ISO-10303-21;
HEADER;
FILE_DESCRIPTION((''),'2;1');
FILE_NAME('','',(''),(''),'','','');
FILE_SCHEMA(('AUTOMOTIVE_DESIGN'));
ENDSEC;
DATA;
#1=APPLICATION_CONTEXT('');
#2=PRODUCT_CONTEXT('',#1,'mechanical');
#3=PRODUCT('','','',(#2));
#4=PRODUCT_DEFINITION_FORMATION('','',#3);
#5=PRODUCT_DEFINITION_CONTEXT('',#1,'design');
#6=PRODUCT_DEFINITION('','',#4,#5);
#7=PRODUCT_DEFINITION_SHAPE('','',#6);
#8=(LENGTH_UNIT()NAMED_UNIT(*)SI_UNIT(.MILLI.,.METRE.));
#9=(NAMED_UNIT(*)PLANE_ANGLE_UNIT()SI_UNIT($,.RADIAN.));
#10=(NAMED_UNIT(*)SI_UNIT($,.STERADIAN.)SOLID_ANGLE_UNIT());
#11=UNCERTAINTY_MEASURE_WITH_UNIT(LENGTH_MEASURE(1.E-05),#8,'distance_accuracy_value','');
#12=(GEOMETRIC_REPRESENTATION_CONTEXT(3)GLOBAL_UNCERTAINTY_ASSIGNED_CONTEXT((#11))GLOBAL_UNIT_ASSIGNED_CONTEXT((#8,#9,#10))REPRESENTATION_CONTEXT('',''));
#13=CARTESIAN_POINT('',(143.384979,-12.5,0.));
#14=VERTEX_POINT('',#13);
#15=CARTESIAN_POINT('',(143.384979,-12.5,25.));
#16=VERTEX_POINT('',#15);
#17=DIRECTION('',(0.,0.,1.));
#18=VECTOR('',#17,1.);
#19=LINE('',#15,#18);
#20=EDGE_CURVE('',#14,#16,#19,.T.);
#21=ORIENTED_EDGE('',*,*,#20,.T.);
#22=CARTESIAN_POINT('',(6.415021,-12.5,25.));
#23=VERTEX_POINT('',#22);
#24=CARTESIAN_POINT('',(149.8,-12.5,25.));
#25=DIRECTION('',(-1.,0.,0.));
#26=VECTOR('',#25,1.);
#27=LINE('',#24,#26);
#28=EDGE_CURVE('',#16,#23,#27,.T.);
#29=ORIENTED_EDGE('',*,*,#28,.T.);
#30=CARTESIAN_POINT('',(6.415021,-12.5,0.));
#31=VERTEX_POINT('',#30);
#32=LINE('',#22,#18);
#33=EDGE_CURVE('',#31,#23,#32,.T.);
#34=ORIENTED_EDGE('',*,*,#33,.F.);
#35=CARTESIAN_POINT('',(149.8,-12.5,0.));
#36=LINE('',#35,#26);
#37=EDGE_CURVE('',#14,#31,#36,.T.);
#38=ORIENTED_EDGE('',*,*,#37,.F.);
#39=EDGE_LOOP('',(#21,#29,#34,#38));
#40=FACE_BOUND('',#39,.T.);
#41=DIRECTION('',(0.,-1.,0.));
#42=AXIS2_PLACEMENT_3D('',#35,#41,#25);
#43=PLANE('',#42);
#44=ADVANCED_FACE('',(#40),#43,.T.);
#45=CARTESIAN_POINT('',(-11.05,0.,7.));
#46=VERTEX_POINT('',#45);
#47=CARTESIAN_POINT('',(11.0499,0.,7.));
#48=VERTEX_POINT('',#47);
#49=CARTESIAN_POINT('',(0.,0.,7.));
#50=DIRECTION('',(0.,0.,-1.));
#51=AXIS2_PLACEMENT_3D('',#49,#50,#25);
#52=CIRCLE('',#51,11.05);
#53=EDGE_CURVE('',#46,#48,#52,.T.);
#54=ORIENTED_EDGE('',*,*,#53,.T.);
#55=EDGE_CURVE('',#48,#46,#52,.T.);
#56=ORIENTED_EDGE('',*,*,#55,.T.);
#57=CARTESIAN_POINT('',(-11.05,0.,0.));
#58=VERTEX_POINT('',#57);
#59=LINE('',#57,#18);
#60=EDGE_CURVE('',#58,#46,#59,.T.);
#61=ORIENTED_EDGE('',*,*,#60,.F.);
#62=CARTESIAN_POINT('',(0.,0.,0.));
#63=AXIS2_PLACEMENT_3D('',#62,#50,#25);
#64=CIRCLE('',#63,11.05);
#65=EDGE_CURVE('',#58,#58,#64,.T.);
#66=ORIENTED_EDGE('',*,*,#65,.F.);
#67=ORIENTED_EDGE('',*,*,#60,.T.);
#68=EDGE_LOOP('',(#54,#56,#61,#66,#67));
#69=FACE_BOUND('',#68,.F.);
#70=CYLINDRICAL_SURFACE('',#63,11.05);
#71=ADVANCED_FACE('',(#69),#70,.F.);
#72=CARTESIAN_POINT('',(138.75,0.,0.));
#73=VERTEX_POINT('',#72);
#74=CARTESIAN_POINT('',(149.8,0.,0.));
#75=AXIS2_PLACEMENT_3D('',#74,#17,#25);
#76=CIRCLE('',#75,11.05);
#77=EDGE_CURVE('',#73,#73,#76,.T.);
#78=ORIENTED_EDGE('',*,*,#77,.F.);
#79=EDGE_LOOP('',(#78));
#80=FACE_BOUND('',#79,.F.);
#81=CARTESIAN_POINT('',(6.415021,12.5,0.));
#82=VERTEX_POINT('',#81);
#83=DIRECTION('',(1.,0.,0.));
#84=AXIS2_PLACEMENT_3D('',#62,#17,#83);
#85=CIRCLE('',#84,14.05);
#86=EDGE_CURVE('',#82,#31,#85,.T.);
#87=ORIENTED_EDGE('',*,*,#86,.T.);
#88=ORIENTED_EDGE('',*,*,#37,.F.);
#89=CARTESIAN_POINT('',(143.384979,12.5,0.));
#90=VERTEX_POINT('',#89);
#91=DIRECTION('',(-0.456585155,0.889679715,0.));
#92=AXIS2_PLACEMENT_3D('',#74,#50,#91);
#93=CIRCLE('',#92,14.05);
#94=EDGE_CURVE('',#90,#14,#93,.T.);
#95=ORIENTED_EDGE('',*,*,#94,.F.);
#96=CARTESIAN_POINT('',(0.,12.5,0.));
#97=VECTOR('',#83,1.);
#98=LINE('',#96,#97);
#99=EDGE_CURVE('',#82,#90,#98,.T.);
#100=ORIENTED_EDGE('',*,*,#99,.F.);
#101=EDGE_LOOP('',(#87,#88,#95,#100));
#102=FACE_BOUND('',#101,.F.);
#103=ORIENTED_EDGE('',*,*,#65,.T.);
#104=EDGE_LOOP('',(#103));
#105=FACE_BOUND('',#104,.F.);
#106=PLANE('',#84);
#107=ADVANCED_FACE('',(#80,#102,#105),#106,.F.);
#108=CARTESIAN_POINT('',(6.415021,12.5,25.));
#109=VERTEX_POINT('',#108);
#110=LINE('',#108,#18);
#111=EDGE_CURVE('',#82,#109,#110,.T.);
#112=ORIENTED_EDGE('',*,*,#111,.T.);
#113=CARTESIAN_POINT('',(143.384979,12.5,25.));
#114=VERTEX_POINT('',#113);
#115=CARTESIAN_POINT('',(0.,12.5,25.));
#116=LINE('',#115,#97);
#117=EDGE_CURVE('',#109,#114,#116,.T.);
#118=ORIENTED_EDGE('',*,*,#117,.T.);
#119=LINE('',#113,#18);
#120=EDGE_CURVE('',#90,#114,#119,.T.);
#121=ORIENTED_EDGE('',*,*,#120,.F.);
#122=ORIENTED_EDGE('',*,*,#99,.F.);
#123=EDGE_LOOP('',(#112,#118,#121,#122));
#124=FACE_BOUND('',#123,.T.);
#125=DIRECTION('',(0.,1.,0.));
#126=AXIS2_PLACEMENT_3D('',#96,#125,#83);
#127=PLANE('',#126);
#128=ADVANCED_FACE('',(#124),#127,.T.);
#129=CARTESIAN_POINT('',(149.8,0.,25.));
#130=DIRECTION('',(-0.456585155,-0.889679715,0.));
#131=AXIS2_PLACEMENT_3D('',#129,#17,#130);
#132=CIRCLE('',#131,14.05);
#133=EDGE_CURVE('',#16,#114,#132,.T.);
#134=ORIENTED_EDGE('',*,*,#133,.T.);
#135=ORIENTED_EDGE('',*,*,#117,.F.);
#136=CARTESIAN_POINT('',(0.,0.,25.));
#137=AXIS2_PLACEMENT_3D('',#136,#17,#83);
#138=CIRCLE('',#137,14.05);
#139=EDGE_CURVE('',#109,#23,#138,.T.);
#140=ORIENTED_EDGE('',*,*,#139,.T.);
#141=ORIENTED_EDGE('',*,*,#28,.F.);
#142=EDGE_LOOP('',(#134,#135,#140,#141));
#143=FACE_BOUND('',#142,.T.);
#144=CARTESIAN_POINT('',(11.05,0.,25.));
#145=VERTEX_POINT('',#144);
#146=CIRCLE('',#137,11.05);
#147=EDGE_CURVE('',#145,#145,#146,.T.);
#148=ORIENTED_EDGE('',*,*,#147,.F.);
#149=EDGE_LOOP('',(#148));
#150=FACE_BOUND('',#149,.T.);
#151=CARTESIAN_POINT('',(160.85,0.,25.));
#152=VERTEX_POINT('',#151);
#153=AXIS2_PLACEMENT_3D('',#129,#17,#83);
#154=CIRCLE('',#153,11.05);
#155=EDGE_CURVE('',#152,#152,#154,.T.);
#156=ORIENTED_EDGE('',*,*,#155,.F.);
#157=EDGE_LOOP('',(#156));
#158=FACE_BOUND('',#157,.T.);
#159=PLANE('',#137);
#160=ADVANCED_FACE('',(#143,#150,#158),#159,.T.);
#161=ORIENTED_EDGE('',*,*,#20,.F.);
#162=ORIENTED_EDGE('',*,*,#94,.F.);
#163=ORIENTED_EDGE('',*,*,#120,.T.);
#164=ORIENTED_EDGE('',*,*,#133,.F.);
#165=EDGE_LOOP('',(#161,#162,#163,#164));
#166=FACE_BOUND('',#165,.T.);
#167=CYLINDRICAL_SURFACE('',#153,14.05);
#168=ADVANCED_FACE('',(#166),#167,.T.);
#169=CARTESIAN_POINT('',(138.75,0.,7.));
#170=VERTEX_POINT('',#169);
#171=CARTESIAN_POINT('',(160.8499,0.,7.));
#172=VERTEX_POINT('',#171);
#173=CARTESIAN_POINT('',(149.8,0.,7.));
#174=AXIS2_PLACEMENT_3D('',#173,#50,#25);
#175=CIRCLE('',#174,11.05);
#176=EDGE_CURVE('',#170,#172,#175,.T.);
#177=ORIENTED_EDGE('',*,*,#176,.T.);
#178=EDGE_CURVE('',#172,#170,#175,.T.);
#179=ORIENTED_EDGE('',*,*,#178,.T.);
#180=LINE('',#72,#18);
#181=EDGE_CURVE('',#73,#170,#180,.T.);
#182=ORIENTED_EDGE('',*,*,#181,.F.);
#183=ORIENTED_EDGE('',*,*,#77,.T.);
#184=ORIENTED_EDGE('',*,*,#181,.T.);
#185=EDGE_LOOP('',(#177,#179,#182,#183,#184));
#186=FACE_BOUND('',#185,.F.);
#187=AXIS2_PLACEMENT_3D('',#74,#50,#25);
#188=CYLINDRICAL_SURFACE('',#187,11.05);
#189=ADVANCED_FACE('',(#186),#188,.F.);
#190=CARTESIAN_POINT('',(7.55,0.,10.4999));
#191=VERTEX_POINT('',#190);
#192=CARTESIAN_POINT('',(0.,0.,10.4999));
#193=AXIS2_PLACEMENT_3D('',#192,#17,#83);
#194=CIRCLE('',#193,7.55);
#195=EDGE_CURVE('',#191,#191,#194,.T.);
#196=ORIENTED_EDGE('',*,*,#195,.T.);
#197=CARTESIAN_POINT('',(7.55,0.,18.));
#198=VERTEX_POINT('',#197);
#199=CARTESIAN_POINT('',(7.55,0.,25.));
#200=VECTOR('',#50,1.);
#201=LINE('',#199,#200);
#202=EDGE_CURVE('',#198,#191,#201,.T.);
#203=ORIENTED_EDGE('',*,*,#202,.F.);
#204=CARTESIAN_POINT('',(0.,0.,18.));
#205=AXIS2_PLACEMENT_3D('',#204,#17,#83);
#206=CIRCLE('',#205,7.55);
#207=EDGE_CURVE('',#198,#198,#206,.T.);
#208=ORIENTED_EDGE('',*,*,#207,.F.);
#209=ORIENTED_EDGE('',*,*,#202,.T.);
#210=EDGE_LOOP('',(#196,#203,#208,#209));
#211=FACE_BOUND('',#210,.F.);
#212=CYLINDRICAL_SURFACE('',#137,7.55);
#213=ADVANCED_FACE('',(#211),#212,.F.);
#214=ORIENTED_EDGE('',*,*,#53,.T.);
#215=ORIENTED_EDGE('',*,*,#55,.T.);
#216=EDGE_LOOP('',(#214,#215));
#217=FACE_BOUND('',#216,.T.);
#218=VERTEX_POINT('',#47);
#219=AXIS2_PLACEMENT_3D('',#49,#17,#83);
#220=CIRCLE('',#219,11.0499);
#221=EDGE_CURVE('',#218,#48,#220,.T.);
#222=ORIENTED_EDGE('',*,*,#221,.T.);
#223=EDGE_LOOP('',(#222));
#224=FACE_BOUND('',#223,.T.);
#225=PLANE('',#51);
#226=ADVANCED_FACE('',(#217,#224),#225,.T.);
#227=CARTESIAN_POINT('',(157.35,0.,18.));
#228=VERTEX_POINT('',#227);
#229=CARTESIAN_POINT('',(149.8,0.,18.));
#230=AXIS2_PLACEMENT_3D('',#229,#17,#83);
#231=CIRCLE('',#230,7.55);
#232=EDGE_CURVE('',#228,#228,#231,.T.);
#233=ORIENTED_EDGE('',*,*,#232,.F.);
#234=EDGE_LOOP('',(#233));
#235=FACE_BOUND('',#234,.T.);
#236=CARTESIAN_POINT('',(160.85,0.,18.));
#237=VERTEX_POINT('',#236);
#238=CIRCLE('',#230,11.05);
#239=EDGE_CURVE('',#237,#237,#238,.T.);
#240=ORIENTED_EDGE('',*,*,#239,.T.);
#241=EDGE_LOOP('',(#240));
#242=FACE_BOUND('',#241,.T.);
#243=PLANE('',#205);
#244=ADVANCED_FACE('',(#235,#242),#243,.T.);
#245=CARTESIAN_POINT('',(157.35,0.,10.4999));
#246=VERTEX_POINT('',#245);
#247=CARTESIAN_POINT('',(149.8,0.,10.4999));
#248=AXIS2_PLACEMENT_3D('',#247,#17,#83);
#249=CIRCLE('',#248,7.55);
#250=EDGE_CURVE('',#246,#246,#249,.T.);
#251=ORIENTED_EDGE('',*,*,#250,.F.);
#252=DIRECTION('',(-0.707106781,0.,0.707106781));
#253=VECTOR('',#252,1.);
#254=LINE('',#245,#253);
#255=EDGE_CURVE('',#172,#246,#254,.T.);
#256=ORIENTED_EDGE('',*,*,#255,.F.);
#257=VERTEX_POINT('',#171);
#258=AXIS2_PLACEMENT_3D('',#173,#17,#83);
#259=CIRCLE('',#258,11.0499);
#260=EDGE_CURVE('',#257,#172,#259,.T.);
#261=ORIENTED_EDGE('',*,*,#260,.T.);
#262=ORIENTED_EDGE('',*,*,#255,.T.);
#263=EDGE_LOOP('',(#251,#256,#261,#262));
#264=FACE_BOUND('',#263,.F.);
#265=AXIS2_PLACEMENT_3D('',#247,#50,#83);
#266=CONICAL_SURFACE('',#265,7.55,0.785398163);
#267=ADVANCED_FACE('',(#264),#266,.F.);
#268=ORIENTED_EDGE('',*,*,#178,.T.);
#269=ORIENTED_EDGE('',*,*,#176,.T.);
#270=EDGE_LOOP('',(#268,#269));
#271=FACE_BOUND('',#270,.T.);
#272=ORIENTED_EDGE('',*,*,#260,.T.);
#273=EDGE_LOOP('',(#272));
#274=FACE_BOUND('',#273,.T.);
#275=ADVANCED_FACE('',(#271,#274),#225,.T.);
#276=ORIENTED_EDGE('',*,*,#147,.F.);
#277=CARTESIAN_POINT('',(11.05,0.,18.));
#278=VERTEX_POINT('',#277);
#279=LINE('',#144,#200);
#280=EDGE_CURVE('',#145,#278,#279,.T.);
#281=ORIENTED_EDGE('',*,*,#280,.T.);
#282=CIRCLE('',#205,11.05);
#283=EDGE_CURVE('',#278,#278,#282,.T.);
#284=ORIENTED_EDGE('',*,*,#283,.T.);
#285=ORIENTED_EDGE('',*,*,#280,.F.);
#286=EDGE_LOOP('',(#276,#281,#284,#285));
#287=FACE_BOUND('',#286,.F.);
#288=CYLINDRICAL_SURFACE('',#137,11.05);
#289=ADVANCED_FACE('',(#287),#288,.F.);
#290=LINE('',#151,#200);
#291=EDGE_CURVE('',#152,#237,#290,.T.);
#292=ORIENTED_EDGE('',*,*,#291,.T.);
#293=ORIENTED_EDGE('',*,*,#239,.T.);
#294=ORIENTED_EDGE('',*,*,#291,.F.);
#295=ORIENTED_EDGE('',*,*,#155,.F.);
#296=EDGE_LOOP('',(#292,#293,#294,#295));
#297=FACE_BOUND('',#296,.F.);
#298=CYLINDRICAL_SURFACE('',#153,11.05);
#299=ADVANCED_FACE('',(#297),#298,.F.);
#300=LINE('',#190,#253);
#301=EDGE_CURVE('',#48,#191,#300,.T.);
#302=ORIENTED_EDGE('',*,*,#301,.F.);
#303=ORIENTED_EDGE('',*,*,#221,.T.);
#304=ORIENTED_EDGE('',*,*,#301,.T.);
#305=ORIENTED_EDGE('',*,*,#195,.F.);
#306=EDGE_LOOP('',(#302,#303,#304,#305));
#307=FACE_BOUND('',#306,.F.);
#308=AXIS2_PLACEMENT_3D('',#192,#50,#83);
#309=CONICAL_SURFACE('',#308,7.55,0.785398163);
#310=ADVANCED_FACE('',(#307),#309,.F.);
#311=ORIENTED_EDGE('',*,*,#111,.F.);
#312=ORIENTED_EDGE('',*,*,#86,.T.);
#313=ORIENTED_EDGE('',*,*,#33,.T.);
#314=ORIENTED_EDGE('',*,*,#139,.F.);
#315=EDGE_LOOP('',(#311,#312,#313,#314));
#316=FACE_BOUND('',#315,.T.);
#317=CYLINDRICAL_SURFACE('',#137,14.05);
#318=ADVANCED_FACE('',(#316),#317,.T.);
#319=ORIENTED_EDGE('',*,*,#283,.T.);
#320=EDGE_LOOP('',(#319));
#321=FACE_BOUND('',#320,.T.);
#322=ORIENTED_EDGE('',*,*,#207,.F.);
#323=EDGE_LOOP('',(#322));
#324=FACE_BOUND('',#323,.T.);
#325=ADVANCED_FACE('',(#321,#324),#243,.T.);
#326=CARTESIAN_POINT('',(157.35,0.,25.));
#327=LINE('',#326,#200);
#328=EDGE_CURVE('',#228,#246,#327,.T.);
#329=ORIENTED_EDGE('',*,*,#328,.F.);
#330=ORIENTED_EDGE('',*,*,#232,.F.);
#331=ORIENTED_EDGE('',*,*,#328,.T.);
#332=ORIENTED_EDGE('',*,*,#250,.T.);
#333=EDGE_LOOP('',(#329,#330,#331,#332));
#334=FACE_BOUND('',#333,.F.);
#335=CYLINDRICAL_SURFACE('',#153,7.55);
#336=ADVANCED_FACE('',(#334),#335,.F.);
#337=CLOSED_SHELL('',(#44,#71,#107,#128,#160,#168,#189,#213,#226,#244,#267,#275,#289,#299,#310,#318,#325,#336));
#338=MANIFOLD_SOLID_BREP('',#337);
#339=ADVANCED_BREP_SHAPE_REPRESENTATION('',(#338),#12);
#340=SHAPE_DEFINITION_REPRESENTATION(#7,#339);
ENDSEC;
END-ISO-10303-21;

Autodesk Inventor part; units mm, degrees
ref_plane "YZ Plane" through (0, 0, 0) normal (1, 0, 0) x (0, 1, 0)
ref_plane "XZ Plane" through (0, 0, 0) normal (0, 1, 0) x (-1, 0, 0)
ref_plane "XY Plane" through (0, 0, 0) normal (0, 0, 1) x (1, 0, 0)
sketch "Sketch1" plane through (0, 0, 0) normal (0, 0, 1) x (1, 0, 0)
  line L0 (0, 12.5) -> (149.8, 12.5)
  arc A0 (149.8, -12.5) -> (149.8, 12.5) centre (149.8, 0) ccw
  line L1 (149.8, -12.5) -> (0, -12.5)
  arc A1 (0, 12.5) -> (0, -12.5) centre (0, 0) ccw
  dimension "d0" = 149.8
  dimension "d2" = 12.5
extrude "Extrusion1" add sketch "Sketch1" along normal blind 25
sketch "Sketch2" plane through (0, 0, 25) normal (0, 0, 1) x (1, 0, 0)
  arc A0 (0, 12.5) -> (0, -12.5) centre (0, 0) ccw projected
  arc A1 (149.8, -12.5) -> (149.8, 12.5) centre (149.8, 0) ccw projected
  circle A2 centre (0, 0) radius 7.55
  circle A3 centre (149.8, 0) radius 7.55
  dimension "d5" = 15.1
extrude "Extrusion2" cut sketch "Sketch2" against normal through all
sketch "Sketch3" plane through (0, 0, 25) normal (0, 0, 1) x (1, 0, 0)
  circle A0 centre (0, 0) radius 7.55 projected
  circle A1 centre (149.8, 0) radius 7.55 projected
  arc A2 (0, 12.5) -> (0, -12.5) centre (0, 0) ccw projected
  arc A3 (149.8, -12.5) -> (149.8, 12.5) centre (149.8, 0) ccw projected
  circle A4 centre (0, 0) radius 11.05
  circle A5 centre (149.8, 0) radius 11.05
  dimension "d9" = 22.1
extrude "Extrusion3" cut sketch "Sketch3" against normal blind 7
sketch "Sketch4" plane through (0, 0, 0) normal (0, 0, -1) x (-1, 0, 0)
  circle A0 centre (0, 0) radius 7.55 projected
  circle A1 centre (-149.8, 0) radius 7.55 projected
  circle A2 centre (-149.8, 0) radius 11.05 projected
  circle A3 centre (0, 0) radius 11.05 projected
extrude "Extrusion4" cut sketch "Sketch4" against normal blind 7
chamfer "Chamfer1" distance 3.5 angle 45 2 edges at (142.25, 0, 7) (-7.55, 0, 7)
sketch "Sketch5" plane through (0, 0, 25) normal (0, 0, 1) x (1, 0, 0)
  circle A0 centre (0, 0) radius 11.05 projected
  circle A1 centre (149.8, 0) radius 11.05 projected
  arc A2 (0, 12.5) -> (0, -12.5) centre (0, 0) ccw projected
  arc A3 (149.8, -12.5) -> (149.8, 12.5) centre (149.8, 0) ccw projected
  circle A4 centre (0, 0) radius 14.05
  circle A5 centre (149.8, 0) radius 14.05
  dimension "d18" = 3
extrude "Extrusion5" add sketch "Sketch5" against normal up to surface (25 mm away)
ref_plane "Work Plane2" through (6.8813, -12.5, 23) normal (0, -1, 0) x (1, 0, 0)
sketch "Sketch6" plane through (6.415, -12.5, 0) normal (0, -1, 0) x (1, 0, 0)
  line L0 (0, 0) -> (136.97, 2.0217)
  line L1 (136.97, 2.0217) -> (131.3954, 22.9783)
  line L2 (0, 25) -> (136.97, 25) construction
  line L3 (136.97, 25) -> (136.97, 0) construction
  line L4 (136.97, 0) -> (0, 0) construction
  line L5 (0, 0) -> (0, 25) construction
  line L6 (136.97, 0) -> (136.97, 25) projected
  line L7 (0, 25) -> (136.97, 25) projected
  point P0 (-6.8813, -23)
  point P1 (136.97, 12.5)
  point P2 (134.1827, 12.5)
  point P3 (68.485, 25)
  point P4 (68.485, 1.0109)
ref_plane "Work Plane1" through (6.8813, 12.5, 23) normal (0, 1, 0) x (1, 0, 0)
sketch "Sketch7" plane through (6.8813, 12.5, 23) normal (0, 1, 0) x (1, 0, 0)
  line L0 (136.5037, 23) -> (-0.4663, 23) construction
  line L1 (-0.4663, 23) -> (-0.4663, -2) construction
  line L2 (-0.4663, -2) -> (136.5037, -2) construction
  line L3 (136.5037, -2) -> (136.5037, 23) construction
  line L4 (136.5037, -2) -> (136.5037, 23) projected
  line L5 (-0.4663, 23) -> (136.5037, 23) projected
  line L6 (-0.4663, 23) -> (-0.4663, -2) projected
  line L7 (136.5037, -2) -> (-0.4663, -2) projected
  point P0 (-6.8813, 23)
extrude "Extrusion6" [suppressed]
extrude "Extrusion7" [suppressed]
properties part number "xy wall arm SP"
